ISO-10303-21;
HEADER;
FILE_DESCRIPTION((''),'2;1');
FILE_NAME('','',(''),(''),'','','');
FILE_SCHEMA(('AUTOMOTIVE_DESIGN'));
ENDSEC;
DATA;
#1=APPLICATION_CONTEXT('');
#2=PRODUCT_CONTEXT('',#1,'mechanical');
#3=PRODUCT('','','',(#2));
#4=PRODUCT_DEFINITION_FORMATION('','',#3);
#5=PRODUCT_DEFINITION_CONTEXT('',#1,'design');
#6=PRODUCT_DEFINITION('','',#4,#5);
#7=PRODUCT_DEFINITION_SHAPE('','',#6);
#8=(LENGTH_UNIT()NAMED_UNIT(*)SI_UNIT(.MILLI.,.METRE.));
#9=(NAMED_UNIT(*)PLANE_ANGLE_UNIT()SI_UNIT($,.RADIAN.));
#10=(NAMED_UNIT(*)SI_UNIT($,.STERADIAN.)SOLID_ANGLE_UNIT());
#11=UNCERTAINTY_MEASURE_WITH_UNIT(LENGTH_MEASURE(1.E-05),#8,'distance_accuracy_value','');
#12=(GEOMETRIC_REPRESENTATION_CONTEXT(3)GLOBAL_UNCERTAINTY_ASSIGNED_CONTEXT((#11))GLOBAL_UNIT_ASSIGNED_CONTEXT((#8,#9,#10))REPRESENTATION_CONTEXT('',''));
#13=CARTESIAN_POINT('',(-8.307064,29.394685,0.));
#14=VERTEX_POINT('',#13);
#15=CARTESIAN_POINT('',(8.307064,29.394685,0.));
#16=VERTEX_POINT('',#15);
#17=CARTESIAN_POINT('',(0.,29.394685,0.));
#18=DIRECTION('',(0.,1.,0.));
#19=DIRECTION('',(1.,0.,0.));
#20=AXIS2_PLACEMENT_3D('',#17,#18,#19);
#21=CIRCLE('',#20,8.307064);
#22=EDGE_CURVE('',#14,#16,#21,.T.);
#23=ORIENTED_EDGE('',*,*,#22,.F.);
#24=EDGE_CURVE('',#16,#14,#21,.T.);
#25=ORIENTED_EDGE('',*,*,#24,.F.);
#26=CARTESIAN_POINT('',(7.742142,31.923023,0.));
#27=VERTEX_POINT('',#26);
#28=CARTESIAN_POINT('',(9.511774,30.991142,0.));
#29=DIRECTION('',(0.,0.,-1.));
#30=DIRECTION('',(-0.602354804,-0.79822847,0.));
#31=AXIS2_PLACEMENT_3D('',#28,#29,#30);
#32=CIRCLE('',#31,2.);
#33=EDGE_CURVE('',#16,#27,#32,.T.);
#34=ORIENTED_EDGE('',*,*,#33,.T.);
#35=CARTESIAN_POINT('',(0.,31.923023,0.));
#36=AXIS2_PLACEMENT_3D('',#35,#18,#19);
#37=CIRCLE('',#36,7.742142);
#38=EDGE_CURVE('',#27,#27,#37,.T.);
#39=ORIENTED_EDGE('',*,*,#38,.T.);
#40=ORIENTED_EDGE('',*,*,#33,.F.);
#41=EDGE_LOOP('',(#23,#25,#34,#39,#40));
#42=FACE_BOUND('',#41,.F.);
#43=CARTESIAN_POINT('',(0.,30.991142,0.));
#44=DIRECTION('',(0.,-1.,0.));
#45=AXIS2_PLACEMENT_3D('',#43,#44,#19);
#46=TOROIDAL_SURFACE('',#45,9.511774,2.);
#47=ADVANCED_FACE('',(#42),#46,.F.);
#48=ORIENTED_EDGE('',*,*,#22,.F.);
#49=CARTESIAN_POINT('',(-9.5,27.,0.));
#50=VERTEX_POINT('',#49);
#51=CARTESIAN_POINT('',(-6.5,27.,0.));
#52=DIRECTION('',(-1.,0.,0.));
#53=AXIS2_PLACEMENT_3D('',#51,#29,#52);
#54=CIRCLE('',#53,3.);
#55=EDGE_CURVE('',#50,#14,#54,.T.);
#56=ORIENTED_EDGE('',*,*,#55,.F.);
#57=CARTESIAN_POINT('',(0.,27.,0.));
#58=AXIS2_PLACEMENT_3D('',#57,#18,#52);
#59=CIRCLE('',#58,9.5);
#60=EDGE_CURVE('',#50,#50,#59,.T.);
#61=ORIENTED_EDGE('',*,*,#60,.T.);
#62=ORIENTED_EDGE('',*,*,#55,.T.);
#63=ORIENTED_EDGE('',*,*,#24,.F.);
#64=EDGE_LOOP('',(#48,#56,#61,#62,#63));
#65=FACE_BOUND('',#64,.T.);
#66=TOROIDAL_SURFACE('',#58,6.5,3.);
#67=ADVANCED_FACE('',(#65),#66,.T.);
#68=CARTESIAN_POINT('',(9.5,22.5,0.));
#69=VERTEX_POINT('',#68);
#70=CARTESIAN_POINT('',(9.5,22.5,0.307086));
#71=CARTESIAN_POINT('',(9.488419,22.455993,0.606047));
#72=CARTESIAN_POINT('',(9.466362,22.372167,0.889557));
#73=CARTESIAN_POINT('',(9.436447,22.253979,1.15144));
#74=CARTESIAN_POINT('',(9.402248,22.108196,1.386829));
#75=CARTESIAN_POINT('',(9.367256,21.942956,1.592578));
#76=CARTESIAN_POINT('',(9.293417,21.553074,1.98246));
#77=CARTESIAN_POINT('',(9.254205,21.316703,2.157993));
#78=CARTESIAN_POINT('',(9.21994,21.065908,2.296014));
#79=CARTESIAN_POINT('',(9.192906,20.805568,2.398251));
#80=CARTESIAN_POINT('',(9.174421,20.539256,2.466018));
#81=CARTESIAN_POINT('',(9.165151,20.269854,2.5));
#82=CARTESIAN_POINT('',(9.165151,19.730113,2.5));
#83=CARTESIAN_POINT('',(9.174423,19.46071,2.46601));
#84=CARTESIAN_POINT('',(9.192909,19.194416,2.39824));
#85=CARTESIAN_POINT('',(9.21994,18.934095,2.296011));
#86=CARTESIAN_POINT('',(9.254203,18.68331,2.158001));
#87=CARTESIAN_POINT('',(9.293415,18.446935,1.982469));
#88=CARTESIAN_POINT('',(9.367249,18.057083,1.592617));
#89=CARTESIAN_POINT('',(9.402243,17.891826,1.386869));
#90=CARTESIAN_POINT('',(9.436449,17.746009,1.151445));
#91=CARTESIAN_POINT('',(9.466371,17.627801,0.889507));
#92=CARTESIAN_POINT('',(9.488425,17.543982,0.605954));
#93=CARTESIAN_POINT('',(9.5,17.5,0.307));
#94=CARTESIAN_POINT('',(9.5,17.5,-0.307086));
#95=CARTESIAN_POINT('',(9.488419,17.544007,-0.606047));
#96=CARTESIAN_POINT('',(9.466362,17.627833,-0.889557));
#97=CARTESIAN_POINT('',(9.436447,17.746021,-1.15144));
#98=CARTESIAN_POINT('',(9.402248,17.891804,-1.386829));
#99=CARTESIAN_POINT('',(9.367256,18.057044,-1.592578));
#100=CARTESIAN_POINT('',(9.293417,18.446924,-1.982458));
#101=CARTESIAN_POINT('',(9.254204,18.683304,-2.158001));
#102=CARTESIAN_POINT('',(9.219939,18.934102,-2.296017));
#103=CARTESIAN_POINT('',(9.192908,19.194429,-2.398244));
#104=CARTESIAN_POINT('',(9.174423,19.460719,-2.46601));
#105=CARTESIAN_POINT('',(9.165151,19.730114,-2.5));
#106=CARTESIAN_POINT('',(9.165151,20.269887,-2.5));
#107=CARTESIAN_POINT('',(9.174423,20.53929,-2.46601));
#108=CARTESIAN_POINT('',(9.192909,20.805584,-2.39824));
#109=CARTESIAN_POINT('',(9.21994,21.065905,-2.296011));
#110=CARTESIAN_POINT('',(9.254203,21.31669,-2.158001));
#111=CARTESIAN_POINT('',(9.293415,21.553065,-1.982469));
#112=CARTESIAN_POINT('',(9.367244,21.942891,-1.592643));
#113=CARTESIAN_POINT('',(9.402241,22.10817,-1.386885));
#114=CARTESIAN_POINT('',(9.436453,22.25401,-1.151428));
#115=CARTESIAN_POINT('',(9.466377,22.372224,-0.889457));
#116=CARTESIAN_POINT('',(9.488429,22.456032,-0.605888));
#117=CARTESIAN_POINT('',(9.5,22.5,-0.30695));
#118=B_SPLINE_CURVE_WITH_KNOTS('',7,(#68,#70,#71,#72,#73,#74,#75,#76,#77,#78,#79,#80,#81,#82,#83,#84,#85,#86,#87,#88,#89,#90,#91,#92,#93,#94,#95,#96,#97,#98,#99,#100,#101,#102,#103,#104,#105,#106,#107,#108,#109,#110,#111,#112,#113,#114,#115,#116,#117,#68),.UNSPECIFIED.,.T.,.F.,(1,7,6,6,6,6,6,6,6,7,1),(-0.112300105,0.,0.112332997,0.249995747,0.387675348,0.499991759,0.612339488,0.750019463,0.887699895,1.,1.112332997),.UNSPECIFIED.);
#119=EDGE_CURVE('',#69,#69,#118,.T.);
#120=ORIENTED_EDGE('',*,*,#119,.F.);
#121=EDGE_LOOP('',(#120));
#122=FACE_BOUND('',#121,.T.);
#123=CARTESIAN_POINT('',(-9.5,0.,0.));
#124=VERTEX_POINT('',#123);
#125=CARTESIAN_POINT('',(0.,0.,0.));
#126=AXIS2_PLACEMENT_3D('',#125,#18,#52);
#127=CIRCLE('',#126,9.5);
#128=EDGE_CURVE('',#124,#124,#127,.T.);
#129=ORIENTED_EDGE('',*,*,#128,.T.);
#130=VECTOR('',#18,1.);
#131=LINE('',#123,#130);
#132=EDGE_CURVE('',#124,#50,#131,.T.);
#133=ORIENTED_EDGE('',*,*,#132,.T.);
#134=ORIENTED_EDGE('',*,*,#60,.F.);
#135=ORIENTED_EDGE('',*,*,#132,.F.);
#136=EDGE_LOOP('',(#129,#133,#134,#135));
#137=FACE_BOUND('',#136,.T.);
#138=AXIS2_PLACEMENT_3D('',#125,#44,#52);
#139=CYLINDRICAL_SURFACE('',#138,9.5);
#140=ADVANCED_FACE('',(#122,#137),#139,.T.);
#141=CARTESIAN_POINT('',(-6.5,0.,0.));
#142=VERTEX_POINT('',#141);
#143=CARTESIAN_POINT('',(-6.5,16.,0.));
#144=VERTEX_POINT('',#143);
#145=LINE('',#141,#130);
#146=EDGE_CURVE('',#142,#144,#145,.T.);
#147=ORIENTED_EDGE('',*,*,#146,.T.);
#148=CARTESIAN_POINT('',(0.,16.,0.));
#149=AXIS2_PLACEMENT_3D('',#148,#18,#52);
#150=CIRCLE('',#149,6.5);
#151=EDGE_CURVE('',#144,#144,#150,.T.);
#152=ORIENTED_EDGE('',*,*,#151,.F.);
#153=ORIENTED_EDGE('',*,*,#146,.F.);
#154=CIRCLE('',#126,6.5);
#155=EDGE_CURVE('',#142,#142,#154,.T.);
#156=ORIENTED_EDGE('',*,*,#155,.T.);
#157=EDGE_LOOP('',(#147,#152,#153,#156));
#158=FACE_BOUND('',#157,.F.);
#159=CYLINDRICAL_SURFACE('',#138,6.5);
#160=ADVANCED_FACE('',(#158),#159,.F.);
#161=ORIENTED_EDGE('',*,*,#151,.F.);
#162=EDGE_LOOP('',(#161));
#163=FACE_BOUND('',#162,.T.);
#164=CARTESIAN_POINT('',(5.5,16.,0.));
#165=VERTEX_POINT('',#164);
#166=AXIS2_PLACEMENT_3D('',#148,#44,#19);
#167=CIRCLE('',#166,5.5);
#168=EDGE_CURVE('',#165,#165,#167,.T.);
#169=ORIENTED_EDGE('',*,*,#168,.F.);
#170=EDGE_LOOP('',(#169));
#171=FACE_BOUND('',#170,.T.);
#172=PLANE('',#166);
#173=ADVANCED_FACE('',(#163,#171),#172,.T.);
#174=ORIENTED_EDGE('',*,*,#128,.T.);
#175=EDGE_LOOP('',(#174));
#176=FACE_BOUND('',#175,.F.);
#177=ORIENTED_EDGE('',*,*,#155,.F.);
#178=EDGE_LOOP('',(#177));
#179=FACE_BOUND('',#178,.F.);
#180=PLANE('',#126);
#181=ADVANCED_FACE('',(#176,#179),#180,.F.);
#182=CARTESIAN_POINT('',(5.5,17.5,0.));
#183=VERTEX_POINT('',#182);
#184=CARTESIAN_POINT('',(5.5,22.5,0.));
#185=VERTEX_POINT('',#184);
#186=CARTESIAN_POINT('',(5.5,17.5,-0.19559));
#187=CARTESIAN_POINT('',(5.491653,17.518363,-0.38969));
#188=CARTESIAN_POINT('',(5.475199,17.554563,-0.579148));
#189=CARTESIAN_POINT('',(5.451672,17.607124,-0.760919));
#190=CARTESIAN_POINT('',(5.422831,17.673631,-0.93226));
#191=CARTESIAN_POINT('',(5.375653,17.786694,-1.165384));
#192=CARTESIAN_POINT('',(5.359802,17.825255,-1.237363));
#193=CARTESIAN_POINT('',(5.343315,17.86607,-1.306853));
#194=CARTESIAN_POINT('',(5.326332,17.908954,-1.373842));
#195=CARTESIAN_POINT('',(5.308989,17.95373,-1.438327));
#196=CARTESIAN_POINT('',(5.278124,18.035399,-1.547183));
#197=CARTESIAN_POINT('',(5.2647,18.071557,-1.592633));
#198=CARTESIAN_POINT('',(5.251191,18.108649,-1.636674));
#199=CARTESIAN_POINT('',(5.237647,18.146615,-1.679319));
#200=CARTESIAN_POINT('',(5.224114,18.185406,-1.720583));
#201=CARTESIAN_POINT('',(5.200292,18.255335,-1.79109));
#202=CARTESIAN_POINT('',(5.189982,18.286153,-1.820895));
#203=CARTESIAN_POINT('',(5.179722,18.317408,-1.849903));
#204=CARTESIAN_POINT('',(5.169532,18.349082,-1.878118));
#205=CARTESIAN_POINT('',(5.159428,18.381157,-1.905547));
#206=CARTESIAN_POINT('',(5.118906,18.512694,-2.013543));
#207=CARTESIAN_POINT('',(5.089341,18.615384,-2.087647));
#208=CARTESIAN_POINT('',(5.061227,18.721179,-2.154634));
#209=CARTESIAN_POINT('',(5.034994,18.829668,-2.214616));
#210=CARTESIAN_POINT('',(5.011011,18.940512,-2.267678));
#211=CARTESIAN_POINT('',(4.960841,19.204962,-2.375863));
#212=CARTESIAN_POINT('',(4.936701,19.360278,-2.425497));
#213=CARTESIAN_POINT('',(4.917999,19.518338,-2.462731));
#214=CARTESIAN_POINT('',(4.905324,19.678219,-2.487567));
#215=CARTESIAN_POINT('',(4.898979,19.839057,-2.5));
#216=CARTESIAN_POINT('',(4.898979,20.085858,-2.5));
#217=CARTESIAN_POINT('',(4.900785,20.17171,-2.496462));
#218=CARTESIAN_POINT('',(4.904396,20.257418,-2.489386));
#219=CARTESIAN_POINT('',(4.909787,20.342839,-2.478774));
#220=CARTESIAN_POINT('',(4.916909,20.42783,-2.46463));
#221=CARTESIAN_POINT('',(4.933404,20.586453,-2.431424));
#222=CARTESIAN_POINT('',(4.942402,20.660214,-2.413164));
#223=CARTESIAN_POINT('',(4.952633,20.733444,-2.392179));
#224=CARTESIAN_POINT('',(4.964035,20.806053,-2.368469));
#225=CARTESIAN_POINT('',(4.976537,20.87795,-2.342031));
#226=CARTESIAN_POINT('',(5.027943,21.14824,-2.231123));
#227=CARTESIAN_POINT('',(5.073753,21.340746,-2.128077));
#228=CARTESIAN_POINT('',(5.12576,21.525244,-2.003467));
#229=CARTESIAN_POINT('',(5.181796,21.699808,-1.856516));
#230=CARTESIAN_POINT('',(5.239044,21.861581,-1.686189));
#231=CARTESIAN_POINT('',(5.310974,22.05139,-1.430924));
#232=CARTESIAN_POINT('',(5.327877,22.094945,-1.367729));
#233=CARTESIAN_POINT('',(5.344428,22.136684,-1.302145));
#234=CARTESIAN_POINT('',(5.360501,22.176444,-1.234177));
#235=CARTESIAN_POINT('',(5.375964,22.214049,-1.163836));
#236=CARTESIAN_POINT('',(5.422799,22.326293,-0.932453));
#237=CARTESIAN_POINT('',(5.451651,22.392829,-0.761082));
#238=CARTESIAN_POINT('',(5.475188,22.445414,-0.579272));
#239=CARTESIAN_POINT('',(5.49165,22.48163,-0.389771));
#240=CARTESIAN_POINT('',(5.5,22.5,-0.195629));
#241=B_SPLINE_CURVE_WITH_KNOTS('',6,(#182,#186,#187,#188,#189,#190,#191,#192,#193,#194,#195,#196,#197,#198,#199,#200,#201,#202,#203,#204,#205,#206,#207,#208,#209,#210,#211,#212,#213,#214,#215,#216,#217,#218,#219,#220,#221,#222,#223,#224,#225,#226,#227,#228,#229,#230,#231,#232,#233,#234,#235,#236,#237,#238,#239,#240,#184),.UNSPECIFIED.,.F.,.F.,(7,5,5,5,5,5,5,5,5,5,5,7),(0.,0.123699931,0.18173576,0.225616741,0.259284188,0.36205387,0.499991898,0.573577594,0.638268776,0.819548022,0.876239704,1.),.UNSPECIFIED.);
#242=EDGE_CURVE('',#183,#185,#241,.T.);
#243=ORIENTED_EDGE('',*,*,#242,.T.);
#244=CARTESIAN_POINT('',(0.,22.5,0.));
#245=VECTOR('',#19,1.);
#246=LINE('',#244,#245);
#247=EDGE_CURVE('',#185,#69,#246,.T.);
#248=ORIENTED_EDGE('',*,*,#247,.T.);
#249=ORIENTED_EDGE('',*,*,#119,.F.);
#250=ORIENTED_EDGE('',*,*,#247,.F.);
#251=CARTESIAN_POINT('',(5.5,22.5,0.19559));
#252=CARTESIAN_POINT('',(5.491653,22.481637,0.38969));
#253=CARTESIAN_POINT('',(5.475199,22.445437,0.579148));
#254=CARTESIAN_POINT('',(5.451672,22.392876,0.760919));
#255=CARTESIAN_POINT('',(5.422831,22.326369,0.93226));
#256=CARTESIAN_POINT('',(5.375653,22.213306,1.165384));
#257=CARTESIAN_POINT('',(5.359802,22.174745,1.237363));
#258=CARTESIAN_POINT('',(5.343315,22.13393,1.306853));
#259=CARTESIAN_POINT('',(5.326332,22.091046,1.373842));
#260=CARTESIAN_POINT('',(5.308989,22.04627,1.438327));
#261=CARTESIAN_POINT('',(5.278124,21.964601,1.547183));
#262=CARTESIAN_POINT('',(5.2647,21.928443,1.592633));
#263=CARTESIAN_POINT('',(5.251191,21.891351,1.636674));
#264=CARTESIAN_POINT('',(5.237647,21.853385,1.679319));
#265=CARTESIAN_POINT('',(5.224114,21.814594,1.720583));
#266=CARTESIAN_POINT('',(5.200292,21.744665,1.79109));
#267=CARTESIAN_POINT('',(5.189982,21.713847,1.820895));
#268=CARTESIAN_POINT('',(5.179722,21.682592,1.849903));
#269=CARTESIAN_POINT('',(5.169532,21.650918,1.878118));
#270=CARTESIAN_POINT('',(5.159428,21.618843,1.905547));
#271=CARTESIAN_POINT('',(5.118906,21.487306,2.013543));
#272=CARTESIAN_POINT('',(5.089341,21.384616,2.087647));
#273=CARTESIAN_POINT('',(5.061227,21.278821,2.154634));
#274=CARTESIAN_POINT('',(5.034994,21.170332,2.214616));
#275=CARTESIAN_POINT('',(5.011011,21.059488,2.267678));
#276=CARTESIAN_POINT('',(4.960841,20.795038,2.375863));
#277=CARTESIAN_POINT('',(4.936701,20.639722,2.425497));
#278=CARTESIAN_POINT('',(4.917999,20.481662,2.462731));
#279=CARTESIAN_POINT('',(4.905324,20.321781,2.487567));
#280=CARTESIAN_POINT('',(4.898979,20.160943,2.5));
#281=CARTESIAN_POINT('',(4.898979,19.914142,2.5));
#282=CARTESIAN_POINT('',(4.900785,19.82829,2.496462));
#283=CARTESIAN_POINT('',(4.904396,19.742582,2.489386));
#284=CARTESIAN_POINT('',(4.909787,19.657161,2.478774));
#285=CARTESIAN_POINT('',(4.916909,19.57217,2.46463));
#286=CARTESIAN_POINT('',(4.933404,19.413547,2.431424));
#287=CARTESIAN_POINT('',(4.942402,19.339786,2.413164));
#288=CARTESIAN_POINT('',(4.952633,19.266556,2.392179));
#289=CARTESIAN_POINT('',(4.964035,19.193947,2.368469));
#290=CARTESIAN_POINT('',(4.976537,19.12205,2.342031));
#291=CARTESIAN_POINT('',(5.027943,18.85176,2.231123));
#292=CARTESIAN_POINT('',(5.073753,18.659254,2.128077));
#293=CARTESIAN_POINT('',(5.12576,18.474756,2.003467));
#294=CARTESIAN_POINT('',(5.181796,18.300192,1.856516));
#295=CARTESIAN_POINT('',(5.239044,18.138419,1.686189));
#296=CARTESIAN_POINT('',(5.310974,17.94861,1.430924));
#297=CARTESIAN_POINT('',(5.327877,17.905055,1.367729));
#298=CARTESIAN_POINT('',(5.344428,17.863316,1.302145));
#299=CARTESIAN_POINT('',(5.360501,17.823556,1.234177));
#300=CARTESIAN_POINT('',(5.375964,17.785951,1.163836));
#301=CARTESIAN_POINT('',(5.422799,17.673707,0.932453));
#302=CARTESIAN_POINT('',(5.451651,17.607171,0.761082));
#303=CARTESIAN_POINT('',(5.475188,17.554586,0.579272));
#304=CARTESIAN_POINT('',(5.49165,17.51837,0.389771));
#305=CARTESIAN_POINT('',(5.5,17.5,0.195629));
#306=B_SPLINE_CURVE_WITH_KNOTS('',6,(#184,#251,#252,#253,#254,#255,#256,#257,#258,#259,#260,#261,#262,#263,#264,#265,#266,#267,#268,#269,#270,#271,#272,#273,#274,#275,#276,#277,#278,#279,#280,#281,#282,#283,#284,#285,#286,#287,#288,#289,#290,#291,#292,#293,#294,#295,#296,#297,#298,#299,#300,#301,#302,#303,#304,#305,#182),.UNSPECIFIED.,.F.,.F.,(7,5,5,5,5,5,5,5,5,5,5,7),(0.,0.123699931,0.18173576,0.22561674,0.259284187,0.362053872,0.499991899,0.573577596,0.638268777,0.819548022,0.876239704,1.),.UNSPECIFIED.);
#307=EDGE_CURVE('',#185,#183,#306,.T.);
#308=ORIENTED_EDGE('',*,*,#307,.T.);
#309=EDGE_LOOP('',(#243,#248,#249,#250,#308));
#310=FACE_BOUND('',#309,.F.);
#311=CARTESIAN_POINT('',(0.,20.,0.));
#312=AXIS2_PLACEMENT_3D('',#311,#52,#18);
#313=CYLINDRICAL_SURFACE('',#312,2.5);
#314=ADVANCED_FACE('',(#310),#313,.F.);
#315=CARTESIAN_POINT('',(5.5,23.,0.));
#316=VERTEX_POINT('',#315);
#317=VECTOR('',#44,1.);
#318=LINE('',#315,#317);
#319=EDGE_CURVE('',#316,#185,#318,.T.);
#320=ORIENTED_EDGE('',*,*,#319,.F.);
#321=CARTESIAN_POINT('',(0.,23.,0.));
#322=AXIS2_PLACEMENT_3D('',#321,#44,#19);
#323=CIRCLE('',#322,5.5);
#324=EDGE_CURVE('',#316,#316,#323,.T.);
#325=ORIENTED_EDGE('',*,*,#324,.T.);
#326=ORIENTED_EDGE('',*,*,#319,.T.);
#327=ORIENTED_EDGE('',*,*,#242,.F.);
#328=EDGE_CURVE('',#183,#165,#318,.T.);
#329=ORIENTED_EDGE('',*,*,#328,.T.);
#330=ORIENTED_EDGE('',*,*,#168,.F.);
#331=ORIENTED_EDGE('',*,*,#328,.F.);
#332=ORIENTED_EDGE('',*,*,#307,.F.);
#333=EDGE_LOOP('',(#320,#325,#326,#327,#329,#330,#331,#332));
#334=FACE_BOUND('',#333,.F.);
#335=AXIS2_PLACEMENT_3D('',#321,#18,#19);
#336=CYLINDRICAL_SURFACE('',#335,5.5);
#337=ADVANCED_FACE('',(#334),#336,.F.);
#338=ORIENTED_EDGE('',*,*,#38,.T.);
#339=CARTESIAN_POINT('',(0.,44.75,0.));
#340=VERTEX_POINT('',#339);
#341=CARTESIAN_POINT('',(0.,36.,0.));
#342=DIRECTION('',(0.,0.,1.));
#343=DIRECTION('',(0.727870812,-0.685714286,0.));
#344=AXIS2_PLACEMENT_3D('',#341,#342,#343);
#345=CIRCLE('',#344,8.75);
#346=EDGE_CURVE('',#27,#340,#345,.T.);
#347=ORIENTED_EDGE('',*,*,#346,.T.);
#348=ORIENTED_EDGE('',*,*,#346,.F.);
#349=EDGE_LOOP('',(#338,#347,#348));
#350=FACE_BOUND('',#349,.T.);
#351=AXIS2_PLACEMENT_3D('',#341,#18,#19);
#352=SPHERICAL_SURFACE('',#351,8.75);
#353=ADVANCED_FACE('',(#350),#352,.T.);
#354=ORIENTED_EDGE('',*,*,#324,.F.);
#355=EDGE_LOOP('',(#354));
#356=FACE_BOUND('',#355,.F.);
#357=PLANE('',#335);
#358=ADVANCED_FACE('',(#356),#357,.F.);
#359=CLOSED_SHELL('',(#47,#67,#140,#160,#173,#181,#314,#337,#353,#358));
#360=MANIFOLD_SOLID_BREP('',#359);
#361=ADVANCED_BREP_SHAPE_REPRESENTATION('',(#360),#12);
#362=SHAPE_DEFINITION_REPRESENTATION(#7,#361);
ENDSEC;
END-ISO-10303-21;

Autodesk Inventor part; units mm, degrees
ref_plane "YZ Plane" through (0, 0, 0) normal (1, 0, 0) x (0, 1, 0)
ref_plane "XZ Plane" through (0, 0, 0) normal (0, 1, 0) x (-1, 0, 0)
ref_plane "XY Plane" through (0, 0, 0) normal (0, 0, 1) x (1, 0, 0)
sketch "Sketch1" plane through (0, 0, 0) normal (0, 1, 0) x (-1, 0, 0)
  circle A0 centre (0, 0) radius 9.5
  circle A1 centre (0, 0) radius 6.5
  dimension "d0" = 13
  dimension "d1" = 3
extrude "Extrusion1" add sketch "Sketch1" along normal blind 30
sketch "Sketch2" plane through (0, 30, 0) normal (0, 1, 0) x (1, 0, 0)
  circle A0 centre (0, 0) radius 6.5
extrude "Extrusion2" add sketch "Sketch2" against normal blind 7
sketch "Sketch3" plane through (0, 30, 0) normal (0, 1, 0) x (1, 0, 0)
  circle A0 centre (0, 0) radius 2.2
  dimension "d6" = 4.4
extrude "Extrusion3" [suppressed]
sketch "Sketch6" plane through (0, 0, 0) normal (0, 0, 1) x (1, 0, 0)
  circle A0 centre (0, 36) radius 8.75
  line L0 (6.5, 23) -> (-6.5, 23) projected
  line L1 (9.5, 30) -> (-9.5, 30) projected
  line L2 (0, 0) -> (0, 49.5814)
  point P0 (0, 27.25)
  point P1 (0, 30)
  point P2 (6.3689, 30)
  point P3 (0, 44.75)
  dimension "d24" = 17.5
  dimension "d25" = 6
  dimension "d26" = 0
revolve "Revolution2" add sketch "Sketch6" angle 360 about axis through (0, 0, 0) along (0, 1, 0) picked at (0.649, 39.7602) contours A0 L1 L2
fillet "Fillet5" radius 3 1 edges at (9.5, 30, 0)
fillet "Fillet6" radius 2 1 edges at (-6.3689, 30, 0)
sketch "Sketch8" plane through (0, 23, 0) normal (0, -1, 0) x (1, 0, 0)
  circle A0 centre (0, 0) radius 5.5
  circle A1 centre (0, 0) radius 6.5 projected
  dimension "d34" = 1
extrude "Extrusion6" add sketch "Sketch8" along normal blind 7
sketch "Sketch7" plane through (0, 0, 0) normal (1, 0, 0) x (0, 1, 0)
  circle A0 centre (20, 0) radius 2.5
  line L0 (27, -9.5) -> (27, 9.5) projected
  point P0 (0, 0)
  dimension "d30" = 5
  dimension "d31" = 7
extrude "Extrusion5" cut sketch "Sketch7" along normal blind 10
sketch "Sketch4" plane through (0, 0, 0) normal (1, 0, 0) x (0, 1, 0)
  circle A0 centre (38, 0) radius 8.75
  line L0 (30, -9.5) -> (30, 9.5) projected
  line L1 (12.9825, 0) -> (37.4487, 0)
  point P0 (0, 0)
  point P1 (36.75, 0)
  point P2 (19.25, 0)
  dimension "d9" = 17.5
  dimension "d11" = 8
properties part number "Ballholder"
